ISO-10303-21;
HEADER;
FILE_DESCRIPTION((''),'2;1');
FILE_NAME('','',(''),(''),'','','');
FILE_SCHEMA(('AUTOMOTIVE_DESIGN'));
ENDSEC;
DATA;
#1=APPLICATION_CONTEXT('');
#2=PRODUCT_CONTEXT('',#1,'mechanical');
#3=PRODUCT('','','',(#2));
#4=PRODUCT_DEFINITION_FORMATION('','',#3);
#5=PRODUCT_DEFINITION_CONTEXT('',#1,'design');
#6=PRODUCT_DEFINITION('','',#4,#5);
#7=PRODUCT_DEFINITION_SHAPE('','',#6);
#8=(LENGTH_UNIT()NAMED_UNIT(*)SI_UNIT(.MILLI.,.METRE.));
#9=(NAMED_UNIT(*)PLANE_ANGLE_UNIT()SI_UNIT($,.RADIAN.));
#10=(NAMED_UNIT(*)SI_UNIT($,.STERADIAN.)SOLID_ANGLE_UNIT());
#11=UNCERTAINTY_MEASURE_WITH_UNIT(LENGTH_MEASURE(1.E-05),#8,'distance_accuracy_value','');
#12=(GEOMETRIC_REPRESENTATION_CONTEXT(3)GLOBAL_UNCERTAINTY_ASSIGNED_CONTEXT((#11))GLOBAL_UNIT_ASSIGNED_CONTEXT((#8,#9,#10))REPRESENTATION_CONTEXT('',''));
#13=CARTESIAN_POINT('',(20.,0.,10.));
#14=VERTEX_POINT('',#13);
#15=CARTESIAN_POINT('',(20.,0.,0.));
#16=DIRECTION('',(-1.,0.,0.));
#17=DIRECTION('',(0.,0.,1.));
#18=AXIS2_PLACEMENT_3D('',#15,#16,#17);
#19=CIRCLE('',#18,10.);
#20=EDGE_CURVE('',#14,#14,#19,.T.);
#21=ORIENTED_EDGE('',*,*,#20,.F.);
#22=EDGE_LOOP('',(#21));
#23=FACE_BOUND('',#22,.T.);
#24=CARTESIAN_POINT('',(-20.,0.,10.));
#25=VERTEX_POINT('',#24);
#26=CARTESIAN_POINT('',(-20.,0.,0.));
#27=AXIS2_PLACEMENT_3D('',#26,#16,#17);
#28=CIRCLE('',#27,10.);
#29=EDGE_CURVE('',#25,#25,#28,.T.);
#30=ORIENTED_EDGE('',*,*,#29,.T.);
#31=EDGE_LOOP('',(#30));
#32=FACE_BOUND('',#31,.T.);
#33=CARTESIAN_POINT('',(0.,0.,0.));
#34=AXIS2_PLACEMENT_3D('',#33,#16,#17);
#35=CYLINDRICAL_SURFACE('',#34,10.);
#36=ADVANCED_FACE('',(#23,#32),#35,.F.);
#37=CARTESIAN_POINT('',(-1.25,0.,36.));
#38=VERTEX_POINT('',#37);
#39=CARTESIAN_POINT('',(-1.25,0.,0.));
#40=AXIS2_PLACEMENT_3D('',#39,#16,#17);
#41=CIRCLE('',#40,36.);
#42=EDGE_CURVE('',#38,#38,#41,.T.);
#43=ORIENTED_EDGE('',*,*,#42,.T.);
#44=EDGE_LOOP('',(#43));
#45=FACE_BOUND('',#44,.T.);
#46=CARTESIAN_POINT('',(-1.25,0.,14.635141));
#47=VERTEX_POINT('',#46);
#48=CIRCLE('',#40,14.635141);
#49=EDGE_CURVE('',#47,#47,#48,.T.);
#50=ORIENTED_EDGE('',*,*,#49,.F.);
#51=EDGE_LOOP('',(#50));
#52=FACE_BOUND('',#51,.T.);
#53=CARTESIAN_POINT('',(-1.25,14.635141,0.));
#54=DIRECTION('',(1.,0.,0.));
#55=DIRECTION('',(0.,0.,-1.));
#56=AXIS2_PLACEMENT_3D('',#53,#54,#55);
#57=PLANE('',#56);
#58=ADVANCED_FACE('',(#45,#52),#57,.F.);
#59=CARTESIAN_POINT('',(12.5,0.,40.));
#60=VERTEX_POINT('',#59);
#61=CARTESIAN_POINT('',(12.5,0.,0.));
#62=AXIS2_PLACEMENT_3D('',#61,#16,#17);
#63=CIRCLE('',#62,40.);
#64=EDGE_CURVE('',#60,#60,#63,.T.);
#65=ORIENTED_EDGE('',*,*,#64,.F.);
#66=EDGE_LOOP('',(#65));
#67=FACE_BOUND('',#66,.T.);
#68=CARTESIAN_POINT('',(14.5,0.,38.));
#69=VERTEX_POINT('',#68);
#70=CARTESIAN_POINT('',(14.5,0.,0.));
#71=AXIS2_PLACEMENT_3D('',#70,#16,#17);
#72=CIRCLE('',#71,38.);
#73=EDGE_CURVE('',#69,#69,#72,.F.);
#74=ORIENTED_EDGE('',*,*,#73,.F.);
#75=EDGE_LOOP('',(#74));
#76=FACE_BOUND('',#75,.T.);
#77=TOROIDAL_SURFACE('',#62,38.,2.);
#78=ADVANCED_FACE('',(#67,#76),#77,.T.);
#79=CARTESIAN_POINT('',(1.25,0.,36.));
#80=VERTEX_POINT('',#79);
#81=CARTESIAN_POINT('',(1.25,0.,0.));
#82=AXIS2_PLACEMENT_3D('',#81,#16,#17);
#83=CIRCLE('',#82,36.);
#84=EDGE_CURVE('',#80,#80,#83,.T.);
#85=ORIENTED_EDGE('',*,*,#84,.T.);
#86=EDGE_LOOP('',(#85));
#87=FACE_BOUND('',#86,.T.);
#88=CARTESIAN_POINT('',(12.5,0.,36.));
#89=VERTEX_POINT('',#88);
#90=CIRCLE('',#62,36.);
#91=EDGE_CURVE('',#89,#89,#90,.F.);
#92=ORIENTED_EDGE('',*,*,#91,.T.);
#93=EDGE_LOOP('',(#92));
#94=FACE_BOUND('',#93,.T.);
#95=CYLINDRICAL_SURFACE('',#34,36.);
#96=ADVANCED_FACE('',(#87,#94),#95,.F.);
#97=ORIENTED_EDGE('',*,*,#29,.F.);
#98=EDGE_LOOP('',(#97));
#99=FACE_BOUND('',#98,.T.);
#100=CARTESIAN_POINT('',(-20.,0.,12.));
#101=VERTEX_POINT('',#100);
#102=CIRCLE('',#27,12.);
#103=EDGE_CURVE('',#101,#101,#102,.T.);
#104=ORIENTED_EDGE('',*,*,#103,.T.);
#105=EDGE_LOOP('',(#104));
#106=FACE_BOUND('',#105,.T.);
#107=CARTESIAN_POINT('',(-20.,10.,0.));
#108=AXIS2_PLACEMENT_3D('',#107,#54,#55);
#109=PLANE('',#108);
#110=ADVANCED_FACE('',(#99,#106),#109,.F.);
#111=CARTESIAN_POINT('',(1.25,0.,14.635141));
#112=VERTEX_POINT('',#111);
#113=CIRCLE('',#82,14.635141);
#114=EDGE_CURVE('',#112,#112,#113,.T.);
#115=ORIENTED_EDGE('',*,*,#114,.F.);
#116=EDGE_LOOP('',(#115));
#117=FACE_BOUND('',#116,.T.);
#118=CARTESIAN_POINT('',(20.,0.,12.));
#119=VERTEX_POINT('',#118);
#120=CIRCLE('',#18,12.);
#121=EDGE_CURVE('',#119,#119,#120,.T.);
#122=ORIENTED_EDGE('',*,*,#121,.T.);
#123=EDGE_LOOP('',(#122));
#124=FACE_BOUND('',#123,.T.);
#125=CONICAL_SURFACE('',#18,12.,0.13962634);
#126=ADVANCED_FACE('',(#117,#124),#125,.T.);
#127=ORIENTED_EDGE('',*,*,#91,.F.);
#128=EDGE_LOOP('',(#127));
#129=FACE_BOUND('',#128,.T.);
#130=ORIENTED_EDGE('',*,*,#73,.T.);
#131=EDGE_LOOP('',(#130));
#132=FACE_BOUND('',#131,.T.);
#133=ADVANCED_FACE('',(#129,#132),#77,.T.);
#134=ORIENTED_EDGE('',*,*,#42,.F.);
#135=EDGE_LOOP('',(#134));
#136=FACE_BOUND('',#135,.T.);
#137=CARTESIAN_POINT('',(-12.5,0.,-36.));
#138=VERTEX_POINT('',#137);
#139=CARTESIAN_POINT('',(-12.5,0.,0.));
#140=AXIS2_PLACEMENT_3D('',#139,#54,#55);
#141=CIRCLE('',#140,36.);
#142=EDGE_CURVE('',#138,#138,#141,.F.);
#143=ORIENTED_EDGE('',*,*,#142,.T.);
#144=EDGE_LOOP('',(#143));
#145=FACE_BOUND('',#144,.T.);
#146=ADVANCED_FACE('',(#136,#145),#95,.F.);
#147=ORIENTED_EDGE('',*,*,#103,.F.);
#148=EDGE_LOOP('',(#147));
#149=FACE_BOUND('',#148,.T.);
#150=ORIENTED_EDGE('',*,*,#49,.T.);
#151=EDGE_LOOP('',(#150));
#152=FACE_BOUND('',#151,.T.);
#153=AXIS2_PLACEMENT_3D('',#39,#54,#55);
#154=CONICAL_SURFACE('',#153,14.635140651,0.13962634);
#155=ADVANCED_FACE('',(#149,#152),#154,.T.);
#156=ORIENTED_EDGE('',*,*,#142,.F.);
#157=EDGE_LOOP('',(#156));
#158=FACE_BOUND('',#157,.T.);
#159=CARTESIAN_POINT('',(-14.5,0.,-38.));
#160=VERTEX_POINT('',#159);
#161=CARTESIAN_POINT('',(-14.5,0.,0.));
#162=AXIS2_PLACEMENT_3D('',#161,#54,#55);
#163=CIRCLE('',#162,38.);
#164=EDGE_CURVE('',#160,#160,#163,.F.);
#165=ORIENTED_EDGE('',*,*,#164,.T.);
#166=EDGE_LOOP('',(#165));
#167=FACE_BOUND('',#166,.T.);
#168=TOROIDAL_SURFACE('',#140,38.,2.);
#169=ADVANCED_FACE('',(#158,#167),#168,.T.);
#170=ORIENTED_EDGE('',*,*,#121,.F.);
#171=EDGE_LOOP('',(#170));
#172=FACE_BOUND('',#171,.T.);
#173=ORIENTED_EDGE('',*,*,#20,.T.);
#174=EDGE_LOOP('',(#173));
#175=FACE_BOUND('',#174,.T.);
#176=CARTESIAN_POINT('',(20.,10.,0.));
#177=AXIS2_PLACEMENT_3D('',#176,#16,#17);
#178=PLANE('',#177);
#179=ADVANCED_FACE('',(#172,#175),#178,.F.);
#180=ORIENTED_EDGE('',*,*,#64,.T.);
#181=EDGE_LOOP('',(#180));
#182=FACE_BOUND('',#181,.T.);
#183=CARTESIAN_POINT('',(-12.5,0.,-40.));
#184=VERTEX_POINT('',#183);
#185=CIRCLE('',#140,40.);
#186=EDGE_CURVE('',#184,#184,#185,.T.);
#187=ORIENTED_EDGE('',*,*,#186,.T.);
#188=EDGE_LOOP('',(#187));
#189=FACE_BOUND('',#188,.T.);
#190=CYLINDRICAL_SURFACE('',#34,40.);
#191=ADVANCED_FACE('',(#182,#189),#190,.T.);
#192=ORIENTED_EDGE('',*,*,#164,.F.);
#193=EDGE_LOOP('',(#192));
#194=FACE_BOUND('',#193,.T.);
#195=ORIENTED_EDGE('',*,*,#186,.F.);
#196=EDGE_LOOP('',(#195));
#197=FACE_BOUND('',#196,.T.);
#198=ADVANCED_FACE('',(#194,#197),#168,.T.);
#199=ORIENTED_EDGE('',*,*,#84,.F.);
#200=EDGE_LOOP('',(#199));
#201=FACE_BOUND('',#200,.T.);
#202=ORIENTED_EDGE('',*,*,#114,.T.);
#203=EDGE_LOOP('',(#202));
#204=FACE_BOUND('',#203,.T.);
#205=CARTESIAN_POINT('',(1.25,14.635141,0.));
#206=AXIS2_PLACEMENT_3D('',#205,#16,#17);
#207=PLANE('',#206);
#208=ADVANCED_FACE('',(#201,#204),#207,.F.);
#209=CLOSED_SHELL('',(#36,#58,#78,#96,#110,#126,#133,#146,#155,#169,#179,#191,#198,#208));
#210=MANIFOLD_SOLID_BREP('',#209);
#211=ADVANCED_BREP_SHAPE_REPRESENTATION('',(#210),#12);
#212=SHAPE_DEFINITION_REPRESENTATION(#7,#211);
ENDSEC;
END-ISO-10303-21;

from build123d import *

# Parameters (mm, degrees)
FILLET1_R = 2


with BuildPart() as part:
    # Sketch2 → Revolve1 (revolve)
    with BuildSketch(Plane.XY, mode=Mode.PRIVATE) as revolve1_sk:
        Polygon((-20, 10), (20, 10), (20, 12), (1.25, 14.635140651), (1.25, 36), (14.5, 36), (14.5, 40), (-14.5, 40), (-14.5, 36), (-1.25, 36), (-1.25, 14.635140651), (-20, 12), align=None)
    revolve(revolve1_sk.sketch.rotate(Axis((0, 0, 0), (1, 0, 0)), 90), axis=Axis((0, 0, 0), (1, 0, 0)))

    # Fillet1
    fillet1_edges = [part.edges().sort_by_distance(p)[0] for p in [
        (14.5, 0, -40),
        (-14.5, 0, -40),
        (-14.5, 0, -36),
        (14.5, 0, -36),
    ]]
    fillet(fillet1_edges, radius=FILLET1_R - 0.0001)  # a hair under: the kernel refuses the full size


solid = part.part
